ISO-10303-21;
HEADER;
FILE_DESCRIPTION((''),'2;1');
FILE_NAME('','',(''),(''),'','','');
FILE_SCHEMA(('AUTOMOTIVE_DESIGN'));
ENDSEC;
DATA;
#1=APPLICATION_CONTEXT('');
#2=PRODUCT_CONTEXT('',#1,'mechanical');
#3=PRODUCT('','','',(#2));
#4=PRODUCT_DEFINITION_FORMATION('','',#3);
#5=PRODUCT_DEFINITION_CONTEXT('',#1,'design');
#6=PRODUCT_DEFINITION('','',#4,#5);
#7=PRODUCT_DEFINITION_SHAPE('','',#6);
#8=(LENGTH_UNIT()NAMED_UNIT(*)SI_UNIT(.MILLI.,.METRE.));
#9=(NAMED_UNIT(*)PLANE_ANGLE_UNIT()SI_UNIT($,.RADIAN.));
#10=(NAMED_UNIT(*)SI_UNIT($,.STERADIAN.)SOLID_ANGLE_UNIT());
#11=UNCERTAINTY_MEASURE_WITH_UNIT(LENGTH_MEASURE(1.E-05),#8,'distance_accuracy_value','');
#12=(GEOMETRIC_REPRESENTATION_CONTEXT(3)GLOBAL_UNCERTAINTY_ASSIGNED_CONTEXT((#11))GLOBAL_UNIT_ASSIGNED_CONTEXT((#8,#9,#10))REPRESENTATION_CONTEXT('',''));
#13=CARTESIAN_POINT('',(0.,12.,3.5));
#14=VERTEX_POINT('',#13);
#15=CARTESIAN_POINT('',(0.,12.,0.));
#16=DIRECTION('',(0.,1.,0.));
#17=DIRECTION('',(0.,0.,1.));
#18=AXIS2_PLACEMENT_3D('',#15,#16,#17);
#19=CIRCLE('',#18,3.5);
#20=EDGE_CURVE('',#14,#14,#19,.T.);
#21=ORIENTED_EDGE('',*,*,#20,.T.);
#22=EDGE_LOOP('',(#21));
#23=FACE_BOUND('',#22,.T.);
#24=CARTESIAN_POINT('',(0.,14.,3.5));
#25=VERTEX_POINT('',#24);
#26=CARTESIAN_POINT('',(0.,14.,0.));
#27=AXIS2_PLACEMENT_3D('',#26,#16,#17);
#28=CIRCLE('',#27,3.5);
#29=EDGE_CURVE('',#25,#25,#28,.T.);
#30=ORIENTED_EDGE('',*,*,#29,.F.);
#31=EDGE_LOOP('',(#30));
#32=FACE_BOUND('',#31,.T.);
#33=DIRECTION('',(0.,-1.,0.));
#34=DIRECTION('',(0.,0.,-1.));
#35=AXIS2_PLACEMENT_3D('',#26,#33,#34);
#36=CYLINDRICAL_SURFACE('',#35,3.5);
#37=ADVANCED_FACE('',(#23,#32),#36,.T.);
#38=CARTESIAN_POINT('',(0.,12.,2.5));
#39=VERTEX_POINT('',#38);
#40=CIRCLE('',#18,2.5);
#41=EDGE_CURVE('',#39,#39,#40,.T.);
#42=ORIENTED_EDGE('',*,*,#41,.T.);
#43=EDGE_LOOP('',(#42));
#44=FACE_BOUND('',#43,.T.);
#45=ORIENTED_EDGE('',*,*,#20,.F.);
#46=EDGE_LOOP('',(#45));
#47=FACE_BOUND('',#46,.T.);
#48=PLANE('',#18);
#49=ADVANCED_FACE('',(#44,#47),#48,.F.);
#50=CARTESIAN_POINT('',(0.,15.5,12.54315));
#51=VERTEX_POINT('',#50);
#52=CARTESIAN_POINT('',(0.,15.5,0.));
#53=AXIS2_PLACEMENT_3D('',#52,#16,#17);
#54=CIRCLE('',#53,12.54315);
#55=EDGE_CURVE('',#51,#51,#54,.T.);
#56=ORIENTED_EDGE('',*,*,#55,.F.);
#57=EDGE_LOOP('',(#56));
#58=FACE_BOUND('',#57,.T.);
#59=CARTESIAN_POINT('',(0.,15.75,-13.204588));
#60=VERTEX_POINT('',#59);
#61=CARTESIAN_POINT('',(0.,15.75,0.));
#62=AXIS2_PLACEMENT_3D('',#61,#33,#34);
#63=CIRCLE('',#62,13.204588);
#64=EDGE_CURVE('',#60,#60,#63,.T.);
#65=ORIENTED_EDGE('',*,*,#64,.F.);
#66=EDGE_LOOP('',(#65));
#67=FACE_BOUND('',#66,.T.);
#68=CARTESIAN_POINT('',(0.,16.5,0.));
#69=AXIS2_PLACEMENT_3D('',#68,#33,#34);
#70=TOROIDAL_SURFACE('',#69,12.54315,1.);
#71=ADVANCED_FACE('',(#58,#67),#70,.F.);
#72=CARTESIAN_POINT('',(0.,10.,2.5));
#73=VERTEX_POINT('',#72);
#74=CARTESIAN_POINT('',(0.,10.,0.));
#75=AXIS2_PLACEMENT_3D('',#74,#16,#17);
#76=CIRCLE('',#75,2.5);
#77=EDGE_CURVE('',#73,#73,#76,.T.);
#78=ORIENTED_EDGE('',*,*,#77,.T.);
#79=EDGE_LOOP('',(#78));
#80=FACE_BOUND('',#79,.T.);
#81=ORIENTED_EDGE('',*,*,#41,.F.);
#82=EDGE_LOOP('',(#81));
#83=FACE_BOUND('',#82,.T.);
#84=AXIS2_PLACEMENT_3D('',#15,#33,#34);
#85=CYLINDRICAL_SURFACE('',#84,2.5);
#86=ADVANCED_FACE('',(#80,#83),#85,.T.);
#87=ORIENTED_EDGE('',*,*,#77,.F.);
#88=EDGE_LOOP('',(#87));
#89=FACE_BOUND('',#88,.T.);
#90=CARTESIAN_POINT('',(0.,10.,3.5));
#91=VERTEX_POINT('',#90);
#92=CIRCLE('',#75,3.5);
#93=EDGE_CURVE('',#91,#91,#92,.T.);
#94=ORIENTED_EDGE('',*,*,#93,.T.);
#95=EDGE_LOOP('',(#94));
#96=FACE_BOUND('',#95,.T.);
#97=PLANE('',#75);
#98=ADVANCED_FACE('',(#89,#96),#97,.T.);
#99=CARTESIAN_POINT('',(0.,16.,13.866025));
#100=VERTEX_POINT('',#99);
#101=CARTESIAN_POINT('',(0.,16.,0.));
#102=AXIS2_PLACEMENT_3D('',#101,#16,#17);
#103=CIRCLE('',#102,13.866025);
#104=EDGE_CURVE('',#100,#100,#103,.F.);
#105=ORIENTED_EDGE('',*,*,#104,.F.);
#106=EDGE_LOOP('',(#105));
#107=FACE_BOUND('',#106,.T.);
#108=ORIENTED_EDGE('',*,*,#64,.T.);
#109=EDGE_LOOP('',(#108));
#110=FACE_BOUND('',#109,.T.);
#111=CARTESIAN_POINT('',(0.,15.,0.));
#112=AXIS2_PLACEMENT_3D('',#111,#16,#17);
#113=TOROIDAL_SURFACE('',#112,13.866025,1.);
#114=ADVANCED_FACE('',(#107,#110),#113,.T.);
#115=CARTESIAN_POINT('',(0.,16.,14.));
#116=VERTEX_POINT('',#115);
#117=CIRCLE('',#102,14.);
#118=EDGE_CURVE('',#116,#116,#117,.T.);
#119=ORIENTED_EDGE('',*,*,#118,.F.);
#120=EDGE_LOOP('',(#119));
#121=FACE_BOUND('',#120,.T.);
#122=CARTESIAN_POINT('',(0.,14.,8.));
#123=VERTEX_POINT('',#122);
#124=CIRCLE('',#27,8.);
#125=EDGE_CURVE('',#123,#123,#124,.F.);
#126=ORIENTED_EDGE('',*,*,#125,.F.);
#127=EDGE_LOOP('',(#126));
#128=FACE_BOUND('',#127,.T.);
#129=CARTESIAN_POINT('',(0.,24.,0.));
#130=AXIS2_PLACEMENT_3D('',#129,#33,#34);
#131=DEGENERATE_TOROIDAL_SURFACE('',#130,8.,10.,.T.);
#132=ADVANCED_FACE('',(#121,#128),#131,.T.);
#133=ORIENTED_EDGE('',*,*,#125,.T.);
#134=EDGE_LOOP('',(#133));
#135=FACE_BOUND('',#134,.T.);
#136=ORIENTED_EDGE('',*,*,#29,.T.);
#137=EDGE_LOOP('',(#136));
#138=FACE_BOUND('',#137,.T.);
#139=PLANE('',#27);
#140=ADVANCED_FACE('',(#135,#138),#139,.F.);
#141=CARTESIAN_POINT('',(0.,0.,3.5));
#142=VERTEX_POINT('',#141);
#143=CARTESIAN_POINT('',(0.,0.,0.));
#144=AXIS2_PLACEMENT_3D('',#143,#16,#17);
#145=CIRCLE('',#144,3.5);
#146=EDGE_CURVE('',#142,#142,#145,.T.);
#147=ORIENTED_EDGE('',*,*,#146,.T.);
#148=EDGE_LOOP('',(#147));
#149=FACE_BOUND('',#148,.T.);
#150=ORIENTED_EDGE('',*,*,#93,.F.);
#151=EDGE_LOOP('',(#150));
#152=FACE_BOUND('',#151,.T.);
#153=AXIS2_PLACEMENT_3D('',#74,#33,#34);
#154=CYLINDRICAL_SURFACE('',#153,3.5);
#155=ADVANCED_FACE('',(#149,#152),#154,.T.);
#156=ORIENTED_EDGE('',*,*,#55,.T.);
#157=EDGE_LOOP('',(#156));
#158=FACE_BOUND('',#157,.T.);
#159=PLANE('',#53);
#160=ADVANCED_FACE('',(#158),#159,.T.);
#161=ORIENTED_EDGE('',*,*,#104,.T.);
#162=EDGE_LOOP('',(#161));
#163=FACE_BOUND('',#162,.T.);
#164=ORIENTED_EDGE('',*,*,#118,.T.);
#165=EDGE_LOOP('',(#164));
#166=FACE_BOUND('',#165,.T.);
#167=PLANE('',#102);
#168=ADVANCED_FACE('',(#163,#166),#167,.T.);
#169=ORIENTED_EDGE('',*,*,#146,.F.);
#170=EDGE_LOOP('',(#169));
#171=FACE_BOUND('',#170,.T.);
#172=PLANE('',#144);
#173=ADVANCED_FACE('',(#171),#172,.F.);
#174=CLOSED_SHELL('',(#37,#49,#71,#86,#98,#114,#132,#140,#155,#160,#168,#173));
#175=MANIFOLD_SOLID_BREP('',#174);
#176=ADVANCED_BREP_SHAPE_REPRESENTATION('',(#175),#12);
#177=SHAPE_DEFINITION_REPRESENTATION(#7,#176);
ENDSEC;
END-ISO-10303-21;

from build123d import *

# Parameters (mm, degrees)
SKETCH1_R           = 3.5
BOSS_EXTRUDE1_DEPTH = 10
SKETCH2_R           = 2.5
BOSS_EXTRUDE2_DEPTH = 2
SKETCH3_R           = 3.5
BOSS_EXTRUDE3_DEPTH = 2
SKETCH4_R           = 14
BOSS_EXTRUDE4_DEPTH = 2
FILLET1_R           = 10
SKETCH5_R           = 13
CUT_EXTRUDE1_DEPTH  = 0.5
FILLET2_R           = 1
FILLET3_R           = 1


with BuildPart() as part:
    # Sketch1 → Boss-Extrude1 (new body)
    with BuildSketch(Plane(origin=(0, 0, 0), x_dir=(1, 0, 0), z_dir=(0, 1, 0))):
        with Locations(Location((0, 0, 0), (0, 0, 270))):
            Circle(SKETCH1_R)
    extrude(amount=BOSS_EXTRUDE1_DEPTH)

    # Sketch2 → Boss-Extrude2 (add)
    with BuildSketch(Plane(origin=(0, 10, 0), x_dir=(1, 0, 0), z_dir=(0, 1, 0))):
        with Locations(Location((0, 0, 0), (0, 0, 270))):
            Circle(SKETCH2_R)
    extrude(amount=BOSS_EXTRUDE2_DEPTH)

    # Sketch3 → Boss-Extrude3 (add)
    with BuildSketch(Plane(origin=(0, 12, 0), x_dir=(1, 0, 0), z_dir=(0, 1, 0))):
        with Locations(Location((0, 0, 0), (0, 0, 270))):
            Circle(SKETCH3_R)
    extrude(amount=BOSS_EXTRUDE3_DEPTH)

    # Sketch4 → Boss-Extrude4 (add)
    with BuildSketch(Plane(origin=(0, 14, 0), x_dir=(1, 0, 0), z_dir=(0, 1, 0))):
        with Locations(Location((0, 0, 0), (0, 0, 270))):
            Circle(SKETCH4_R)
    extrude(amount=BOSS_EXTRUDE4_DEPTH)

    # Fillet1
    # the kernel refuses this fillet: 10 mm, written as the material it takes off along each edge
    with BuildSketch(Plane(origin=(0, 14, 0), x_dir=(0, 0, 1), z_dir=(-1, 0, 0))) as fillet1_piece_1:
        with BuildLine():
            CenterArc((8, 10), FILLET1_R, 270, 36.869897646)
            Line((8, 0), (8, -0.2))
            Line((8, -0.2), (14, -0.2))
            Line((14, -0.2), (14.2, 0))
            ThreePointArc((14.2, 0), (14.2, 1), (14.12, 1.84))
            Line((14.12, 1.84), (14, 2))
        make_face()
    revolve(axis=Axis((0, 14, 0), (0, 1, 0)), mode=Mode.SUBTRACT)

    # Sketch5 → Cut-Extrude1 (cut)
    with BuildSketch(Plane(origin=(0, 16, 0), x_dir=(1, 0, 0), z_dir=(0, 1, 0))):
        with Locations(Location((0, 0, 0), (0, 0, 270))):
            Circle(SKETCH5_R)
    extrude(amount=-CUT_EXTRUDE1_DEPTH, mode=Mode.SUBTRACT)

    # Fillet2
    # the kernel refuses this fillet: 1 mm, written as the material it takes off along each edge
    with BuildSketch(Plane(origin=(0, 16, 0), x_dir=(0, 0, 1), z_dir=(-1, 0, 0))) as fillet2_piece_1:
        with BuildLine():
            CenterArc((13.866025404, -1), FILLET2_R, 90, 60)
            Line((13, -0.5), (12.982679492, -0.49))
            ThreePointArc((12.982679492, -0.49), (12.98, -0.25), (12.98, 0))
            Line((12.98, 0), (13, 0.02))
            Line((13, 0.02), (13.866025404, 0.02))
            Line((13.866025404, 0.02), (13.866025404, 0))
        make_face()
    revolve(axis=Axis((0, 16, 0), (0, 1, 0)), mode=Mode.SUBTRACT)

    # Fillet3
    fillet3_edges = [part.edges().sort_by_distance(p)[0] for p in [
        (0, 15.5, -13),
    ]]
    fillet(fillet3_edges, radius=FILLET3_R)


solid = part.part
